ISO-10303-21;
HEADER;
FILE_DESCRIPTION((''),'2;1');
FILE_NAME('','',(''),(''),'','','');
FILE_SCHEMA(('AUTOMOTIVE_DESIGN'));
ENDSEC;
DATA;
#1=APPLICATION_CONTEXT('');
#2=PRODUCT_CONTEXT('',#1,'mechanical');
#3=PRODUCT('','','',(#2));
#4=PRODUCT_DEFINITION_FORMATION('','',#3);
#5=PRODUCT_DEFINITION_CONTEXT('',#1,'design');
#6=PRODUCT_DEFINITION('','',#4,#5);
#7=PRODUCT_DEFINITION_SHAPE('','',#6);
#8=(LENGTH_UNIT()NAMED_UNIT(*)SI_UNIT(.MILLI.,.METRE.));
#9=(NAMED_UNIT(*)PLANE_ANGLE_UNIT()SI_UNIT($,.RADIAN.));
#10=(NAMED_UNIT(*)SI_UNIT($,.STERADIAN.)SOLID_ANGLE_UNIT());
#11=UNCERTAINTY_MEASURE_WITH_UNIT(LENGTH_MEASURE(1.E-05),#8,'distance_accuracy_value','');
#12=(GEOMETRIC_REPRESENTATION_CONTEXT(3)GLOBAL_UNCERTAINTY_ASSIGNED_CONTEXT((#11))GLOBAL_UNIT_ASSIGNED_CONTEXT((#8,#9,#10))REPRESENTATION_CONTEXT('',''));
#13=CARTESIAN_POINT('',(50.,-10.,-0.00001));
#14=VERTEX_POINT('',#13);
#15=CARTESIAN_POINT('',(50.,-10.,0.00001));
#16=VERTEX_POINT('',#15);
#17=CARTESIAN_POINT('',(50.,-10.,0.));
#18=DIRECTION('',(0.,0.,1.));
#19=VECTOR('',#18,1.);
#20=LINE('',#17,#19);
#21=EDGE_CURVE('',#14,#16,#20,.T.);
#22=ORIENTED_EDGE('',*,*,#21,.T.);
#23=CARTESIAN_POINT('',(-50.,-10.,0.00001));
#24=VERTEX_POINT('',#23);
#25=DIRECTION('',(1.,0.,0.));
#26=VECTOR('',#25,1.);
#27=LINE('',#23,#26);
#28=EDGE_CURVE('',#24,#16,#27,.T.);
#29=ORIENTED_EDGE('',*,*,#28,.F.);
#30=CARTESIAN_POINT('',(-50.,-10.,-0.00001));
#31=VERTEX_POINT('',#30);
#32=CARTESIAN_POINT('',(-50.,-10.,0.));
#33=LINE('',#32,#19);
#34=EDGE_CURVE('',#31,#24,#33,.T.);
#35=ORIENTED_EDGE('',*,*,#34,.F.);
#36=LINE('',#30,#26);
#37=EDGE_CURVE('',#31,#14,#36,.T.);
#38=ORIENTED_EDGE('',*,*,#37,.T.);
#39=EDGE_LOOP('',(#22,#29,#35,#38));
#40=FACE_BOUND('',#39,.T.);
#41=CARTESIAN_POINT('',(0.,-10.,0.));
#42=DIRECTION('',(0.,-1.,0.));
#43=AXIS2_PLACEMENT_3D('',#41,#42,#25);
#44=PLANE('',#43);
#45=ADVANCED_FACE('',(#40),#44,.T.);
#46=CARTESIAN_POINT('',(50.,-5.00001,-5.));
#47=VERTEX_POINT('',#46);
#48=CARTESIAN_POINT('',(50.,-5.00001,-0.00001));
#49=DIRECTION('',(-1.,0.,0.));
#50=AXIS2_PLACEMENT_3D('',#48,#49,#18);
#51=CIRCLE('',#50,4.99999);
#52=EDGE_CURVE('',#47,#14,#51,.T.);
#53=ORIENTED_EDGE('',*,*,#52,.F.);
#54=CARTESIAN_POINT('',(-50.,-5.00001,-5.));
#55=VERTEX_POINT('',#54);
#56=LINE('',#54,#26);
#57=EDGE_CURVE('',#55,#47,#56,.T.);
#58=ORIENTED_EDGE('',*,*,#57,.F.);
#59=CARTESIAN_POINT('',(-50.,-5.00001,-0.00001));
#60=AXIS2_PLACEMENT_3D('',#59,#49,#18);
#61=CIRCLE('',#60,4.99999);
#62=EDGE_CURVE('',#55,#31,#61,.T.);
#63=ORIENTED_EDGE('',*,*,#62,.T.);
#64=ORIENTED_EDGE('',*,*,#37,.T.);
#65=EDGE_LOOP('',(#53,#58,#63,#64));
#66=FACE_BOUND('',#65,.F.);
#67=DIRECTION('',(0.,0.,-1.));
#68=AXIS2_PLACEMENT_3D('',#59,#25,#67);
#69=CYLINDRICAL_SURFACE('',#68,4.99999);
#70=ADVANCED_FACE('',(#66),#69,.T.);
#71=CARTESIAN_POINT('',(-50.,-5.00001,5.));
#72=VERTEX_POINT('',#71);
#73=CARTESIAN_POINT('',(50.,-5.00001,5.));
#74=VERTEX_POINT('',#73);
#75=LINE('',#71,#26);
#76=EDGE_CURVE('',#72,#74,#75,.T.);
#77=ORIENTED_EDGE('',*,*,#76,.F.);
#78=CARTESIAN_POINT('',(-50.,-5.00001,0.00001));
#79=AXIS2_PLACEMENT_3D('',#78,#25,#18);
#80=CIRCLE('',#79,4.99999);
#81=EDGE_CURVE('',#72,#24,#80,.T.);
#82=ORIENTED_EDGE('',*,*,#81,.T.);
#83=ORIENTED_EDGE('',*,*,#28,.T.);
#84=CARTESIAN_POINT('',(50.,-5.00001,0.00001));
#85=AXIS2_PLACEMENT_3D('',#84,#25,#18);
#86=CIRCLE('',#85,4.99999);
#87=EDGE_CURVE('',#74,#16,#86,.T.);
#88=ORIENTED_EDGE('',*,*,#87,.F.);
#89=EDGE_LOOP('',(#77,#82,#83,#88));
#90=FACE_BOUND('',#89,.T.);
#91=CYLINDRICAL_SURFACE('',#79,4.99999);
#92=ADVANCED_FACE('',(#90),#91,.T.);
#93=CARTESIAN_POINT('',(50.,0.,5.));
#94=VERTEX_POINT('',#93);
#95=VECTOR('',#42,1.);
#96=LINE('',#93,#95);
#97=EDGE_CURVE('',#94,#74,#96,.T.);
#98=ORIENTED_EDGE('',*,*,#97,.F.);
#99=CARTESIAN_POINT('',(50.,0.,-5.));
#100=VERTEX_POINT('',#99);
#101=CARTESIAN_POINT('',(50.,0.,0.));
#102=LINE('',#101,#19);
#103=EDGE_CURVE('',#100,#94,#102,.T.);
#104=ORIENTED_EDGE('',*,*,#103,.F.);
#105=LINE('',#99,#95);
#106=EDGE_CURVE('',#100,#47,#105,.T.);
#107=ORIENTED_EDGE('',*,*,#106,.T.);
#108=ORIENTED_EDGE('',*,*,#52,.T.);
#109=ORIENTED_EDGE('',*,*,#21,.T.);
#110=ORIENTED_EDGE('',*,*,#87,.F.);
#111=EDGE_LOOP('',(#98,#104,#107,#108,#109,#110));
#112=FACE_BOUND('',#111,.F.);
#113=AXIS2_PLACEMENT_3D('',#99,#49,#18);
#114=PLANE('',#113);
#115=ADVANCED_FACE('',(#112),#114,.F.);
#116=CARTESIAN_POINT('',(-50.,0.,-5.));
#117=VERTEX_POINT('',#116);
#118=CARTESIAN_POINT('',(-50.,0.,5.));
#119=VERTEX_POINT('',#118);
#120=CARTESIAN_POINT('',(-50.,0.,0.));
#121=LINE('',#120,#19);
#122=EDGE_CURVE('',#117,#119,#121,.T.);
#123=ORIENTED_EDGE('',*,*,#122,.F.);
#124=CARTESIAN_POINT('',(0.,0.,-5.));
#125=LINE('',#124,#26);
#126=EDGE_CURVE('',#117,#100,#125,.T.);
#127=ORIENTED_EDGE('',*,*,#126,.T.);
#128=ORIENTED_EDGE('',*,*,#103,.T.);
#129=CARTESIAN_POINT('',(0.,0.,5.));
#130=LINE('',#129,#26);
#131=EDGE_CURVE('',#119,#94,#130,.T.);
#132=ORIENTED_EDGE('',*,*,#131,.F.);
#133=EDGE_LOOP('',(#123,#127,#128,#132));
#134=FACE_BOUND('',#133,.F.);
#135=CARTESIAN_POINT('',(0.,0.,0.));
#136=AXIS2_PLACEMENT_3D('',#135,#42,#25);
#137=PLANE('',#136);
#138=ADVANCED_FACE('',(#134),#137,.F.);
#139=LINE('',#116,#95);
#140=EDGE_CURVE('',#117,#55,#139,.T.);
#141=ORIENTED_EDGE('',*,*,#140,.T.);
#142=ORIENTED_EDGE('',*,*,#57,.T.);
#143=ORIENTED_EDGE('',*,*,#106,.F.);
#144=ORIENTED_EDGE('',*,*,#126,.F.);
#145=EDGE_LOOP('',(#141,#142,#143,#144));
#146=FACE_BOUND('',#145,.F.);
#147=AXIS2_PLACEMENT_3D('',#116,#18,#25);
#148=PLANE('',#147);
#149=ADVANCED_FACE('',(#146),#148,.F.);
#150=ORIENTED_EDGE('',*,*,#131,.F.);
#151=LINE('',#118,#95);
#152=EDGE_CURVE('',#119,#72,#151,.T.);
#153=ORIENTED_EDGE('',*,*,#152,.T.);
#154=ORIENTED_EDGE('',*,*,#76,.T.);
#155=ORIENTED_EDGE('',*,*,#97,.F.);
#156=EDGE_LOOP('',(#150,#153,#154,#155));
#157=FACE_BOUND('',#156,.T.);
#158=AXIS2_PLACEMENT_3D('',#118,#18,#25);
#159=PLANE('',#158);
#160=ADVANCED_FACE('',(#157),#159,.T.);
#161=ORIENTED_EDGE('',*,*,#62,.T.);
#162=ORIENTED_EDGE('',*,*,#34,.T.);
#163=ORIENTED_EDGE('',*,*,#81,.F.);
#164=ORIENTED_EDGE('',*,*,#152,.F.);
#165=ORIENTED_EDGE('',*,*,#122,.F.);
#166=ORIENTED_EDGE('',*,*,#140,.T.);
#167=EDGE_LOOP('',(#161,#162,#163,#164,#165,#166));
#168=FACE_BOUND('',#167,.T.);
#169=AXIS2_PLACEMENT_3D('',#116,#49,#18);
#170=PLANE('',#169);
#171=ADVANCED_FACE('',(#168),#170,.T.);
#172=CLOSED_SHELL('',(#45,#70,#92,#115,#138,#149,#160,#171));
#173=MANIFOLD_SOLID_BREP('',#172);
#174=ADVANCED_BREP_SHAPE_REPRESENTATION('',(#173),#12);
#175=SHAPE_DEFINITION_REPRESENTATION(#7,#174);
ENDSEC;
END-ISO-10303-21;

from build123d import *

# Parameters (mm, degrees)
F0_W     = 100
F0_H     = 10
F1_DEPTH = 10
F2_R     = 4.99999


# Not quite as in the source:
# - a fillet or chamfer is up to 0.001 mm smaller than in the source, because OpenCascade refuses the exact size


with BuildPart() as f1:
    # F0 (on Front) → F1 (new body)
    with BuildSketch(Plane.XZ):
        Rectangle(F0_W, F0_H)
    extrude(amount=F1_DEPTH)

    # F2 (radius 5 in the source; OpenCascade refuses exactly that, so slightly less here)
    f2_edges = [f1.edges().sort_by_distance(p)[0] for p in [
        (0, -10, -5),
        (0, -10, 5),
    ]]
    fillet(f2_edges, radius=F2_R)


solid = f1.part
